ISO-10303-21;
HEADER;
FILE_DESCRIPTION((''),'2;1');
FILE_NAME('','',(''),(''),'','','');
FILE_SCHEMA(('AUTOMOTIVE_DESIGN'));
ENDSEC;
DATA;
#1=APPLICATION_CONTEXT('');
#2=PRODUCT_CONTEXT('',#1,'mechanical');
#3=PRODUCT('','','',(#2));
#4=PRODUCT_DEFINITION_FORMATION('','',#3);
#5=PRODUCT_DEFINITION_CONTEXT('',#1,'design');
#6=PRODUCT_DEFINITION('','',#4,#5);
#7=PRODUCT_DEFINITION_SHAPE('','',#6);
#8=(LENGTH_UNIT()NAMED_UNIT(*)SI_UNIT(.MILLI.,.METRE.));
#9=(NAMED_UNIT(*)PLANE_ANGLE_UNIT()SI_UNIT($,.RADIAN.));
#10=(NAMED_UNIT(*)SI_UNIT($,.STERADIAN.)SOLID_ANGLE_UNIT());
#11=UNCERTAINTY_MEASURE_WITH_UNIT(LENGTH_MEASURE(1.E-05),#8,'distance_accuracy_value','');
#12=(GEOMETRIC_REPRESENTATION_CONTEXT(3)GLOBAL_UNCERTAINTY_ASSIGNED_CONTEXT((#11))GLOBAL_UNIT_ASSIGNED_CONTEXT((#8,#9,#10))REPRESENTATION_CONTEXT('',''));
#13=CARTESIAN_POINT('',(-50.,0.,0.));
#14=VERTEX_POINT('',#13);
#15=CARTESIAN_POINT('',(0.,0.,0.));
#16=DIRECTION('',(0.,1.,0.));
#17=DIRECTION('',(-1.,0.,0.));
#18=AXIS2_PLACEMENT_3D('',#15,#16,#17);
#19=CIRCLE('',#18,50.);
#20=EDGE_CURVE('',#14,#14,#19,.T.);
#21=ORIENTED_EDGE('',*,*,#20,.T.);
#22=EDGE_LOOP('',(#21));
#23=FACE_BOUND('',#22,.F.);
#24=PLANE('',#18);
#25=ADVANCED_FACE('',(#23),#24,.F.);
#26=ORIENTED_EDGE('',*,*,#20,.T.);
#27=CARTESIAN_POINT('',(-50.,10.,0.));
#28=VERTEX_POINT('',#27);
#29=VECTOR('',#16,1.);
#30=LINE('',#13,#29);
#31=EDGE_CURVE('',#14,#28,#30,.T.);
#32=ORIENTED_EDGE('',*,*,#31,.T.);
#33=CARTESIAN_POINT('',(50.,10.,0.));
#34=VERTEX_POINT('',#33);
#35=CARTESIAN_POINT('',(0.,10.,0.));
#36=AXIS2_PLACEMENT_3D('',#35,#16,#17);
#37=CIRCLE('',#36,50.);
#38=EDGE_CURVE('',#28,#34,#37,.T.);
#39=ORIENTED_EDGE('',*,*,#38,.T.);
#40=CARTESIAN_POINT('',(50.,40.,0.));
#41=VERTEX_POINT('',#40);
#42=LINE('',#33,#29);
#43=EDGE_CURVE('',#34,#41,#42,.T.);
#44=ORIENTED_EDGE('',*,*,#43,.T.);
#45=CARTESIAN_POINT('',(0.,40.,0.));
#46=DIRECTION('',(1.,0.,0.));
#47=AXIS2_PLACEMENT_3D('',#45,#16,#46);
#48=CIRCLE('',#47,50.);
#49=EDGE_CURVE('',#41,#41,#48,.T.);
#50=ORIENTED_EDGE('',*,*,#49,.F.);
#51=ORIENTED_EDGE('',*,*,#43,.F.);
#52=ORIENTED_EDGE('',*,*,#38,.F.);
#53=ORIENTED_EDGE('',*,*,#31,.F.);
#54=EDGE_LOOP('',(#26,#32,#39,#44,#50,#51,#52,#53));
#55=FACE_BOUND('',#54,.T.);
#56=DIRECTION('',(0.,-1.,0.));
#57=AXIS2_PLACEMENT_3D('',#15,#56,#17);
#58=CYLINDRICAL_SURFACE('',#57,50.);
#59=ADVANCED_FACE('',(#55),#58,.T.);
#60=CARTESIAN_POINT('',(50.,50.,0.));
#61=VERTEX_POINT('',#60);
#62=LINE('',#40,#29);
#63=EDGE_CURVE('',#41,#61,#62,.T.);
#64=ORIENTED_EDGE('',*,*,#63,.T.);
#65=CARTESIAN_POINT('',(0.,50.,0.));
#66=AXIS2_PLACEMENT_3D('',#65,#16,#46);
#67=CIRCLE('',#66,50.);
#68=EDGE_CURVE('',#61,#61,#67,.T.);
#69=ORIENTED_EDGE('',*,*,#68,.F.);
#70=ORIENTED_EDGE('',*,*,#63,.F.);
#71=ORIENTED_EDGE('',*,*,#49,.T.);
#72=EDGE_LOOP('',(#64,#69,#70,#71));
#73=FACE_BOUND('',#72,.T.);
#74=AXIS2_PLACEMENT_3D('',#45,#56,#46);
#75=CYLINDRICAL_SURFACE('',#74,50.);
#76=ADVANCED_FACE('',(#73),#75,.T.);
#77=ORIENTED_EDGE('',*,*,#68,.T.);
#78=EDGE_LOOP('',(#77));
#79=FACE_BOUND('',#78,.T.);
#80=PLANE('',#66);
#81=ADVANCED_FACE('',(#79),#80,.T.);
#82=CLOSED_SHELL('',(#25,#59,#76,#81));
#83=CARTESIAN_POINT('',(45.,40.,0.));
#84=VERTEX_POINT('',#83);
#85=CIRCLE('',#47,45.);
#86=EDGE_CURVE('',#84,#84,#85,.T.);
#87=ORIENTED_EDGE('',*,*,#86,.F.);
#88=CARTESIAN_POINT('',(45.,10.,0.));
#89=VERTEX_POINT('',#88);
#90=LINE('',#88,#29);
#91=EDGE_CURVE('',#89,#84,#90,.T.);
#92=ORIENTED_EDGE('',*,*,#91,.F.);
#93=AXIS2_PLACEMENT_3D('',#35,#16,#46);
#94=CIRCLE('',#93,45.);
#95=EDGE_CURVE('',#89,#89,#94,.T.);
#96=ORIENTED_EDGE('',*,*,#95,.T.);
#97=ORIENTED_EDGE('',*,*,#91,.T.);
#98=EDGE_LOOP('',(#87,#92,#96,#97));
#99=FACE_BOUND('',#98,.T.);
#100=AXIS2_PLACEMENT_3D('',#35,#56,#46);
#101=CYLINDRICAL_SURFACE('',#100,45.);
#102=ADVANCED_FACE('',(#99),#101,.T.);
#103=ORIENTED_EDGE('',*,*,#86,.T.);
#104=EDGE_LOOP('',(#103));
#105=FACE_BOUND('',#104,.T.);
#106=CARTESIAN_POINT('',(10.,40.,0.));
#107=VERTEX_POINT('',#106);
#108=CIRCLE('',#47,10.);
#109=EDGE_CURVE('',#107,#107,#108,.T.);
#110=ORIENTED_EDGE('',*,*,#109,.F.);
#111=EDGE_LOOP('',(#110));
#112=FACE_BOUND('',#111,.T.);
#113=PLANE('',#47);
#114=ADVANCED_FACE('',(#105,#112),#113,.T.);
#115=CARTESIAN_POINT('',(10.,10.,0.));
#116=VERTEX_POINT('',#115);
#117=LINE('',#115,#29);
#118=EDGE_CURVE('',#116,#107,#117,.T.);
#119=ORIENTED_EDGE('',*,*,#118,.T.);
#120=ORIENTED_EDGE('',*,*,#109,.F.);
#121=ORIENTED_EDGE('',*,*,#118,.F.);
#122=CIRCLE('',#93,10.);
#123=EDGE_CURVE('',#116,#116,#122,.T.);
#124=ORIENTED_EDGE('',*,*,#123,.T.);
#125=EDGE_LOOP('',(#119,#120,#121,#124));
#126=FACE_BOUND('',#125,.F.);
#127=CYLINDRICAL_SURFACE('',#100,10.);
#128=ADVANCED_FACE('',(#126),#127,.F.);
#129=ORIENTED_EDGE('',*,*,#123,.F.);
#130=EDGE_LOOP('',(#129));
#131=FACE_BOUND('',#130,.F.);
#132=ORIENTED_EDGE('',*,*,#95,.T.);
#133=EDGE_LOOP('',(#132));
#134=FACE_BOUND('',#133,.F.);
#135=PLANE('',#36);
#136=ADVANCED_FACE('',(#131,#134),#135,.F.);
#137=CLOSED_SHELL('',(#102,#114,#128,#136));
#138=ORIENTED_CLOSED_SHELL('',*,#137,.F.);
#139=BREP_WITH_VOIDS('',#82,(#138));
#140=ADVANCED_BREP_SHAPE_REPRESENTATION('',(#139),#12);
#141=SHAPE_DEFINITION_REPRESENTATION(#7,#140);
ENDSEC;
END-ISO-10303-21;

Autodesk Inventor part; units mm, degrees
ref_plane "YZ Plane" through (0, 0, 0) normal (1, 0, 0) x (0, 1, 0)
ref_plane "XZ Plane" through (0, 0, 0) normal (0, 1, 0) x (-1, 0, 0)
ref_plane "XY Plane" through (0, 0, 0) normal (0, 0, 1) x (1, 0, 0)
sketch "Sketch1" plane through (0, 0, 0) normal (0, 1, 0) x (-1, 0, 0)
  point P0 (0, 0)
sketch "Sketch2" plane through (0, 0, 0) normal (0, 1, 0) x (-1, 0, 0)
  circle A0 centre (0, 0) radius 50
  dimension "d0" = 100
extrude "Extrusion1" add sketch "Sketch2" along normal blind 10
sketch "Sketch3" plane through (0, 10, 0) normal (0, 1, 0) x (1, 0, 0)
  circle A0 centre (0, 0) radius 50
  circle A1 centre (0, 0) radius 45
  circle A2 centre (0, 0) radius 10
  dimension "d3" = 90
  dimension "d4" = 20
extrude "Extrusion2" add sketch "Sketch3" along normal blind 30
sketch "Sketch4" plane through (0, 40, 0) normal (0, 1, 0) x (1, 0, 0)
  circle A0 centre (0, 0) radius 50
extrude "Extrusion3" add sketch "Sketch4" along normal blind 10
properties part number "cyl2_10cm_5cm"
